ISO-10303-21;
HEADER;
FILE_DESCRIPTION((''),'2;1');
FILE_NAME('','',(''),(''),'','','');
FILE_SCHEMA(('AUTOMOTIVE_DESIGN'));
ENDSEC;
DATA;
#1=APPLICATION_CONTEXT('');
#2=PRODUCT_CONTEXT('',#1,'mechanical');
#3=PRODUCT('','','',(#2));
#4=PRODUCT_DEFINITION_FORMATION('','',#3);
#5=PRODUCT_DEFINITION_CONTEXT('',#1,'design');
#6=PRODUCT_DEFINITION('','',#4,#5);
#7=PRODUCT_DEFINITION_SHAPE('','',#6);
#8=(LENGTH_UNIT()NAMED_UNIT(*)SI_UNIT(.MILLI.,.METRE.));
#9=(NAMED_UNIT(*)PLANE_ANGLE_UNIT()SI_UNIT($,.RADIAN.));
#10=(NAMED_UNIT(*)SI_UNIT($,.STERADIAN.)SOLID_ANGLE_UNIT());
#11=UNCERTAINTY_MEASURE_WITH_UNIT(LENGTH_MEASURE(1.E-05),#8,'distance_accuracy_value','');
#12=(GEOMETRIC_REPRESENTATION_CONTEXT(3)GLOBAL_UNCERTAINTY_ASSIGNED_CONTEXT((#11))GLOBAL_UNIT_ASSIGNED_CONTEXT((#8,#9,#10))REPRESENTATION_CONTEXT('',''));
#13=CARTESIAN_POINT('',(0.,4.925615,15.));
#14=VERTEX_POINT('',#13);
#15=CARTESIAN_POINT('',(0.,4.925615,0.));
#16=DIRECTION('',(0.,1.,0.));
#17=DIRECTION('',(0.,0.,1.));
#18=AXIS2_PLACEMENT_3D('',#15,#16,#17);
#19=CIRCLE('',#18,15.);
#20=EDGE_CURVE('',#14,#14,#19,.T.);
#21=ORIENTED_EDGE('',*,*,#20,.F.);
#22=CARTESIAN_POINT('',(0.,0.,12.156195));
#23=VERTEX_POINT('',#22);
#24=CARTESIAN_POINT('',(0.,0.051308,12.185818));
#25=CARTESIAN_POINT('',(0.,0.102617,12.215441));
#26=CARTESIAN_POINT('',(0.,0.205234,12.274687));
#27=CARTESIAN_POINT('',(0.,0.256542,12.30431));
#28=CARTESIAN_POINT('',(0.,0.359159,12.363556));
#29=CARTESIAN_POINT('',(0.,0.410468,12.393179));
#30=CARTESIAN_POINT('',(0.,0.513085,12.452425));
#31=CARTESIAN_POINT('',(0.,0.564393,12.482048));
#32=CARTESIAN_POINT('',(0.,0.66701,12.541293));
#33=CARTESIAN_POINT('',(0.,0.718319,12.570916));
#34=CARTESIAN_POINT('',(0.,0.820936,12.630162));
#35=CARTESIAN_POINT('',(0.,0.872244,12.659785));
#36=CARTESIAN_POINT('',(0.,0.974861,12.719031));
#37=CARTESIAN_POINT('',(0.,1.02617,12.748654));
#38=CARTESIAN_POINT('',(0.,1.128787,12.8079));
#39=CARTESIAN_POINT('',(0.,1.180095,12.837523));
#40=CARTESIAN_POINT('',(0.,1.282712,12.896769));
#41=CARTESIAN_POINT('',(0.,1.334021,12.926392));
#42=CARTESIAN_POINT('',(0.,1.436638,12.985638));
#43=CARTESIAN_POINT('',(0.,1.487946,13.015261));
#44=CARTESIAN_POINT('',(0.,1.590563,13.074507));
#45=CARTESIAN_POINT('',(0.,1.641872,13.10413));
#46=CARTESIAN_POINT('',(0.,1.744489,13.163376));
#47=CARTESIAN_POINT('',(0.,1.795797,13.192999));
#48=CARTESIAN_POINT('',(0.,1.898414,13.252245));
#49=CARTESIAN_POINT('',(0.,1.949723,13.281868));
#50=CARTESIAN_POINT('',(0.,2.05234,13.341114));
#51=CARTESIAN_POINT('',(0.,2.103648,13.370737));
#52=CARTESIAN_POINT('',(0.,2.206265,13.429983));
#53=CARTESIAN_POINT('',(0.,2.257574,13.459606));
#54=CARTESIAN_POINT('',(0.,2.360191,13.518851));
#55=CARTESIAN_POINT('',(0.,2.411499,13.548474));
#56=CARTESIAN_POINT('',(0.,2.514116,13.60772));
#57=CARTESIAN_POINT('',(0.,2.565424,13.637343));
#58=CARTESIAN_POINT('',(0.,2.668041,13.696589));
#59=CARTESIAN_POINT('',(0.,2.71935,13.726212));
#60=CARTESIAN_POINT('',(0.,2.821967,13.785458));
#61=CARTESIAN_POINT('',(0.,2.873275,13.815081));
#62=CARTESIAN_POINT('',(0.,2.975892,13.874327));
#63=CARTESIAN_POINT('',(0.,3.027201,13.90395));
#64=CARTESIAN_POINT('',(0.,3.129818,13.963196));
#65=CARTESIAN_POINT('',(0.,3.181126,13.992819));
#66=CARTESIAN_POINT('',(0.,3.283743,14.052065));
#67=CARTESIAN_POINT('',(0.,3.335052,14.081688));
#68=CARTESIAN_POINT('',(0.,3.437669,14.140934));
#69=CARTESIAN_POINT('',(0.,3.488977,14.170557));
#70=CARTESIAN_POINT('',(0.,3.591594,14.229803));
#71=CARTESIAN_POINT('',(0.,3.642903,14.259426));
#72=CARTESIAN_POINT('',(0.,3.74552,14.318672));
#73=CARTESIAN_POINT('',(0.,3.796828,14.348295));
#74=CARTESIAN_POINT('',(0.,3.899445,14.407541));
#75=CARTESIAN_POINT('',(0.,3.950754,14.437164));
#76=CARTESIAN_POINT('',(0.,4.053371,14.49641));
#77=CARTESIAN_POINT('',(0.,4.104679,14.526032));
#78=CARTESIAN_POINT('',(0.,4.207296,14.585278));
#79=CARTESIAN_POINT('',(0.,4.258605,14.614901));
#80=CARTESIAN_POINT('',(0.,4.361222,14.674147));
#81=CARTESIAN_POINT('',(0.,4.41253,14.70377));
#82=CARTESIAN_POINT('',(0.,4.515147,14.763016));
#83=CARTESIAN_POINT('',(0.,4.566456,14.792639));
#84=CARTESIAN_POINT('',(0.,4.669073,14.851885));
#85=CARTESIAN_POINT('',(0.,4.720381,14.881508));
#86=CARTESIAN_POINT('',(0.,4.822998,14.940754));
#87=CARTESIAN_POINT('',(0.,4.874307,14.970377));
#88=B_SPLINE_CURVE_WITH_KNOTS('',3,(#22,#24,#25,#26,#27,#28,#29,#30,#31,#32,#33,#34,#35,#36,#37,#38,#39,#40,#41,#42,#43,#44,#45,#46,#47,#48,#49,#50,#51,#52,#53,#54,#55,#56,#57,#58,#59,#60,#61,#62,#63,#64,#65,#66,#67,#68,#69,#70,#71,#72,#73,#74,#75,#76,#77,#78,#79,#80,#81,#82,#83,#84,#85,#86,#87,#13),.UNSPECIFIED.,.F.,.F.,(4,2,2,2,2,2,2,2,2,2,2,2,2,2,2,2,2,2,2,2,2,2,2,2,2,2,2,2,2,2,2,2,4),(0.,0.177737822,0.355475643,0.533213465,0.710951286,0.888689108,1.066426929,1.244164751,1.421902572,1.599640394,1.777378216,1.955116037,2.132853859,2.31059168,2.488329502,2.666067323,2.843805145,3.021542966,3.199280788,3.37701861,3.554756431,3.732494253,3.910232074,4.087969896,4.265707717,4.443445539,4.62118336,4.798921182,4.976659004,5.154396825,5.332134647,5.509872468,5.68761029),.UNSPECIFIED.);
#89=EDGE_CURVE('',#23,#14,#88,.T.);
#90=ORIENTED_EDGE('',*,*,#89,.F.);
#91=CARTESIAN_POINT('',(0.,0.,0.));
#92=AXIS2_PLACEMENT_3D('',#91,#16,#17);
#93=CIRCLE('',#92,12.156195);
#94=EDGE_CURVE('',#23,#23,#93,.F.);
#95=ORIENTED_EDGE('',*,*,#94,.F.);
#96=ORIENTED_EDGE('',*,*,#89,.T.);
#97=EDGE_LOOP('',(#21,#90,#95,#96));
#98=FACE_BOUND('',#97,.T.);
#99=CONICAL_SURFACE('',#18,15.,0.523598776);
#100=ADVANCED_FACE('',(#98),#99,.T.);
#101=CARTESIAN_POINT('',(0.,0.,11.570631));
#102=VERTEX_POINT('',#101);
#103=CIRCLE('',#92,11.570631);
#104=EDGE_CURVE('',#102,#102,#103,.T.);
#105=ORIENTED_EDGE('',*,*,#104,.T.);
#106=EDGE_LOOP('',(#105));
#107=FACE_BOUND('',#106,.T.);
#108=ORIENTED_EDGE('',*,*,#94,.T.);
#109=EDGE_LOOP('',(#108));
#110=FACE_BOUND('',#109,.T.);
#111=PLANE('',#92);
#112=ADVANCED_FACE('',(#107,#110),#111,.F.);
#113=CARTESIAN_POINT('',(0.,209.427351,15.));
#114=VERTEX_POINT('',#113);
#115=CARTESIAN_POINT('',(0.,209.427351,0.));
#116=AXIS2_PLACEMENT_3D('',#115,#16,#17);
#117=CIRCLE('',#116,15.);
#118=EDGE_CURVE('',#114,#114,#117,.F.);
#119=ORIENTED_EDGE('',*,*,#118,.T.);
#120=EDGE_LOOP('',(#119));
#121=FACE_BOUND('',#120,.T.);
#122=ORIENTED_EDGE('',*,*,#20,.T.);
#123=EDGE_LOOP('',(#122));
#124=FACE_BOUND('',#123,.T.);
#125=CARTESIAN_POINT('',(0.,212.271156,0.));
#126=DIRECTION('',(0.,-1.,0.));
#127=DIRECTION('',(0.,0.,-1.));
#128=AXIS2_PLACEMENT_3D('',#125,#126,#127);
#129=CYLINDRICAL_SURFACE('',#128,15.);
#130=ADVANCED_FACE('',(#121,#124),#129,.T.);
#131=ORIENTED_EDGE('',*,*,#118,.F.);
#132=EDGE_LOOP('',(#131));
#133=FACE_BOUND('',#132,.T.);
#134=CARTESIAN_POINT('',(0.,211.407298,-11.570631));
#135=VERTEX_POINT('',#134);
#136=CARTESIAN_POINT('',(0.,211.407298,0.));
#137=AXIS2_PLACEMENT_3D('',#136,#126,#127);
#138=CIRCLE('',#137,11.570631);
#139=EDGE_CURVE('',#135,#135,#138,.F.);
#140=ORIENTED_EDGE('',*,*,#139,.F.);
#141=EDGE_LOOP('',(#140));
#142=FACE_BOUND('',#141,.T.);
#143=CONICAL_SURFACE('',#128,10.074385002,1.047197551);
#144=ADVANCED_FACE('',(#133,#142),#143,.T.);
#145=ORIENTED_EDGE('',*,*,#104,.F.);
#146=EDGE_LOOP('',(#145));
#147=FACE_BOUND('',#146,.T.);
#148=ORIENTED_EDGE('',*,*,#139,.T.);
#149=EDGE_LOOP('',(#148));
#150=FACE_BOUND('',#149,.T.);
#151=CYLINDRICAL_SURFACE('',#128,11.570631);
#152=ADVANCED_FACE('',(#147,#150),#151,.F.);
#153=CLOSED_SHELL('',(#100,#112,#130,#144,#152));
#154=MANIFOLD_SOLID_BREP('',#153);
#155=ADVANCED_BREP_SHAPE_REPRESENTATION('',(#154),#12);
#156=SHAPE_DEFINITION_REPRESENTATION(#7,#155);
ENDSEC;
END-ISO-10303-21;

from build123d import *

# Parameters (mm, degrees)
SKETCH1_R           = 15
BOSS_EXTRUDE1_DEPTH = 212.271156
SKETCH2_R           = 11.570630693
CUT_EXTRUDE1_DEPTH  = 214.328487712
CHAMFER1_SIZE       = 2.843805
CHAMFER1_SIZE_2     = 4.925615


with BuildPart() as part:
    # Sketch1 → Boss-Extrude1 (new body)
    with BuildSketch(Plane(origin=(0, 0, 0), x_dir=(1, 0, 0), z_dir=(0, 1, 0))):
        with Locations(Location((0, 0, 0), (0, 0, 270))):
            Circle(SKETCH1_R)
    extrude(amount=BOSS_EXTRUDE1_DEPTH)

    # Sketch2 → Cut-Extrude1 (cut, through all)
    with BuildSketch(Plane(origin=(0, 0, 0), x_dir=(1, 0, 0), z_dir=(0, 1, 0))):
        with Locations(Location((0, 0, 0), (0, 0, 270))):
            Circle(SKETCH2_R)
    extrude(amount=CUT_EXTRUDE1_DEPTH, mode=Mode.SUBTRACT)

    # Chamfer1
    # the kernel refuses this chamfer: 4.925615, 2.843805 mm, written as the material it takes off along each edge
    with BuildSketch(Plane(origin=(0, 212.271156, 0), x_dir=(0, 0, 1), z_dir=(-1, 0, 0))) as chamfer1_piece_1:
        Polygon((15, -CHAMFER1_SIZE), (15 - CHAMFER1_SIZE_2, 0), (15, 0), align=None)
    revolve(axis=Axis((0, 212.271156, 0), (0, 1, 0)), mode=Mode.SUBTRACT)
    with BuildSketch(Plane(origin=(0, 0, 0), x_dir=(0, 0, 1), z_dir=(-1, 0, 0))) as chamfer1_piece_2:
        Polygon((15, CHAMFER1_SIZE_2), (15 - CHAMFER1_SIZE, 0), (15, 0), align=None)
    revolve(axis=Axis((0, 0, 0), (0, 1, 0)), mode=Mode.SUBTRACT)


solid = part.part
